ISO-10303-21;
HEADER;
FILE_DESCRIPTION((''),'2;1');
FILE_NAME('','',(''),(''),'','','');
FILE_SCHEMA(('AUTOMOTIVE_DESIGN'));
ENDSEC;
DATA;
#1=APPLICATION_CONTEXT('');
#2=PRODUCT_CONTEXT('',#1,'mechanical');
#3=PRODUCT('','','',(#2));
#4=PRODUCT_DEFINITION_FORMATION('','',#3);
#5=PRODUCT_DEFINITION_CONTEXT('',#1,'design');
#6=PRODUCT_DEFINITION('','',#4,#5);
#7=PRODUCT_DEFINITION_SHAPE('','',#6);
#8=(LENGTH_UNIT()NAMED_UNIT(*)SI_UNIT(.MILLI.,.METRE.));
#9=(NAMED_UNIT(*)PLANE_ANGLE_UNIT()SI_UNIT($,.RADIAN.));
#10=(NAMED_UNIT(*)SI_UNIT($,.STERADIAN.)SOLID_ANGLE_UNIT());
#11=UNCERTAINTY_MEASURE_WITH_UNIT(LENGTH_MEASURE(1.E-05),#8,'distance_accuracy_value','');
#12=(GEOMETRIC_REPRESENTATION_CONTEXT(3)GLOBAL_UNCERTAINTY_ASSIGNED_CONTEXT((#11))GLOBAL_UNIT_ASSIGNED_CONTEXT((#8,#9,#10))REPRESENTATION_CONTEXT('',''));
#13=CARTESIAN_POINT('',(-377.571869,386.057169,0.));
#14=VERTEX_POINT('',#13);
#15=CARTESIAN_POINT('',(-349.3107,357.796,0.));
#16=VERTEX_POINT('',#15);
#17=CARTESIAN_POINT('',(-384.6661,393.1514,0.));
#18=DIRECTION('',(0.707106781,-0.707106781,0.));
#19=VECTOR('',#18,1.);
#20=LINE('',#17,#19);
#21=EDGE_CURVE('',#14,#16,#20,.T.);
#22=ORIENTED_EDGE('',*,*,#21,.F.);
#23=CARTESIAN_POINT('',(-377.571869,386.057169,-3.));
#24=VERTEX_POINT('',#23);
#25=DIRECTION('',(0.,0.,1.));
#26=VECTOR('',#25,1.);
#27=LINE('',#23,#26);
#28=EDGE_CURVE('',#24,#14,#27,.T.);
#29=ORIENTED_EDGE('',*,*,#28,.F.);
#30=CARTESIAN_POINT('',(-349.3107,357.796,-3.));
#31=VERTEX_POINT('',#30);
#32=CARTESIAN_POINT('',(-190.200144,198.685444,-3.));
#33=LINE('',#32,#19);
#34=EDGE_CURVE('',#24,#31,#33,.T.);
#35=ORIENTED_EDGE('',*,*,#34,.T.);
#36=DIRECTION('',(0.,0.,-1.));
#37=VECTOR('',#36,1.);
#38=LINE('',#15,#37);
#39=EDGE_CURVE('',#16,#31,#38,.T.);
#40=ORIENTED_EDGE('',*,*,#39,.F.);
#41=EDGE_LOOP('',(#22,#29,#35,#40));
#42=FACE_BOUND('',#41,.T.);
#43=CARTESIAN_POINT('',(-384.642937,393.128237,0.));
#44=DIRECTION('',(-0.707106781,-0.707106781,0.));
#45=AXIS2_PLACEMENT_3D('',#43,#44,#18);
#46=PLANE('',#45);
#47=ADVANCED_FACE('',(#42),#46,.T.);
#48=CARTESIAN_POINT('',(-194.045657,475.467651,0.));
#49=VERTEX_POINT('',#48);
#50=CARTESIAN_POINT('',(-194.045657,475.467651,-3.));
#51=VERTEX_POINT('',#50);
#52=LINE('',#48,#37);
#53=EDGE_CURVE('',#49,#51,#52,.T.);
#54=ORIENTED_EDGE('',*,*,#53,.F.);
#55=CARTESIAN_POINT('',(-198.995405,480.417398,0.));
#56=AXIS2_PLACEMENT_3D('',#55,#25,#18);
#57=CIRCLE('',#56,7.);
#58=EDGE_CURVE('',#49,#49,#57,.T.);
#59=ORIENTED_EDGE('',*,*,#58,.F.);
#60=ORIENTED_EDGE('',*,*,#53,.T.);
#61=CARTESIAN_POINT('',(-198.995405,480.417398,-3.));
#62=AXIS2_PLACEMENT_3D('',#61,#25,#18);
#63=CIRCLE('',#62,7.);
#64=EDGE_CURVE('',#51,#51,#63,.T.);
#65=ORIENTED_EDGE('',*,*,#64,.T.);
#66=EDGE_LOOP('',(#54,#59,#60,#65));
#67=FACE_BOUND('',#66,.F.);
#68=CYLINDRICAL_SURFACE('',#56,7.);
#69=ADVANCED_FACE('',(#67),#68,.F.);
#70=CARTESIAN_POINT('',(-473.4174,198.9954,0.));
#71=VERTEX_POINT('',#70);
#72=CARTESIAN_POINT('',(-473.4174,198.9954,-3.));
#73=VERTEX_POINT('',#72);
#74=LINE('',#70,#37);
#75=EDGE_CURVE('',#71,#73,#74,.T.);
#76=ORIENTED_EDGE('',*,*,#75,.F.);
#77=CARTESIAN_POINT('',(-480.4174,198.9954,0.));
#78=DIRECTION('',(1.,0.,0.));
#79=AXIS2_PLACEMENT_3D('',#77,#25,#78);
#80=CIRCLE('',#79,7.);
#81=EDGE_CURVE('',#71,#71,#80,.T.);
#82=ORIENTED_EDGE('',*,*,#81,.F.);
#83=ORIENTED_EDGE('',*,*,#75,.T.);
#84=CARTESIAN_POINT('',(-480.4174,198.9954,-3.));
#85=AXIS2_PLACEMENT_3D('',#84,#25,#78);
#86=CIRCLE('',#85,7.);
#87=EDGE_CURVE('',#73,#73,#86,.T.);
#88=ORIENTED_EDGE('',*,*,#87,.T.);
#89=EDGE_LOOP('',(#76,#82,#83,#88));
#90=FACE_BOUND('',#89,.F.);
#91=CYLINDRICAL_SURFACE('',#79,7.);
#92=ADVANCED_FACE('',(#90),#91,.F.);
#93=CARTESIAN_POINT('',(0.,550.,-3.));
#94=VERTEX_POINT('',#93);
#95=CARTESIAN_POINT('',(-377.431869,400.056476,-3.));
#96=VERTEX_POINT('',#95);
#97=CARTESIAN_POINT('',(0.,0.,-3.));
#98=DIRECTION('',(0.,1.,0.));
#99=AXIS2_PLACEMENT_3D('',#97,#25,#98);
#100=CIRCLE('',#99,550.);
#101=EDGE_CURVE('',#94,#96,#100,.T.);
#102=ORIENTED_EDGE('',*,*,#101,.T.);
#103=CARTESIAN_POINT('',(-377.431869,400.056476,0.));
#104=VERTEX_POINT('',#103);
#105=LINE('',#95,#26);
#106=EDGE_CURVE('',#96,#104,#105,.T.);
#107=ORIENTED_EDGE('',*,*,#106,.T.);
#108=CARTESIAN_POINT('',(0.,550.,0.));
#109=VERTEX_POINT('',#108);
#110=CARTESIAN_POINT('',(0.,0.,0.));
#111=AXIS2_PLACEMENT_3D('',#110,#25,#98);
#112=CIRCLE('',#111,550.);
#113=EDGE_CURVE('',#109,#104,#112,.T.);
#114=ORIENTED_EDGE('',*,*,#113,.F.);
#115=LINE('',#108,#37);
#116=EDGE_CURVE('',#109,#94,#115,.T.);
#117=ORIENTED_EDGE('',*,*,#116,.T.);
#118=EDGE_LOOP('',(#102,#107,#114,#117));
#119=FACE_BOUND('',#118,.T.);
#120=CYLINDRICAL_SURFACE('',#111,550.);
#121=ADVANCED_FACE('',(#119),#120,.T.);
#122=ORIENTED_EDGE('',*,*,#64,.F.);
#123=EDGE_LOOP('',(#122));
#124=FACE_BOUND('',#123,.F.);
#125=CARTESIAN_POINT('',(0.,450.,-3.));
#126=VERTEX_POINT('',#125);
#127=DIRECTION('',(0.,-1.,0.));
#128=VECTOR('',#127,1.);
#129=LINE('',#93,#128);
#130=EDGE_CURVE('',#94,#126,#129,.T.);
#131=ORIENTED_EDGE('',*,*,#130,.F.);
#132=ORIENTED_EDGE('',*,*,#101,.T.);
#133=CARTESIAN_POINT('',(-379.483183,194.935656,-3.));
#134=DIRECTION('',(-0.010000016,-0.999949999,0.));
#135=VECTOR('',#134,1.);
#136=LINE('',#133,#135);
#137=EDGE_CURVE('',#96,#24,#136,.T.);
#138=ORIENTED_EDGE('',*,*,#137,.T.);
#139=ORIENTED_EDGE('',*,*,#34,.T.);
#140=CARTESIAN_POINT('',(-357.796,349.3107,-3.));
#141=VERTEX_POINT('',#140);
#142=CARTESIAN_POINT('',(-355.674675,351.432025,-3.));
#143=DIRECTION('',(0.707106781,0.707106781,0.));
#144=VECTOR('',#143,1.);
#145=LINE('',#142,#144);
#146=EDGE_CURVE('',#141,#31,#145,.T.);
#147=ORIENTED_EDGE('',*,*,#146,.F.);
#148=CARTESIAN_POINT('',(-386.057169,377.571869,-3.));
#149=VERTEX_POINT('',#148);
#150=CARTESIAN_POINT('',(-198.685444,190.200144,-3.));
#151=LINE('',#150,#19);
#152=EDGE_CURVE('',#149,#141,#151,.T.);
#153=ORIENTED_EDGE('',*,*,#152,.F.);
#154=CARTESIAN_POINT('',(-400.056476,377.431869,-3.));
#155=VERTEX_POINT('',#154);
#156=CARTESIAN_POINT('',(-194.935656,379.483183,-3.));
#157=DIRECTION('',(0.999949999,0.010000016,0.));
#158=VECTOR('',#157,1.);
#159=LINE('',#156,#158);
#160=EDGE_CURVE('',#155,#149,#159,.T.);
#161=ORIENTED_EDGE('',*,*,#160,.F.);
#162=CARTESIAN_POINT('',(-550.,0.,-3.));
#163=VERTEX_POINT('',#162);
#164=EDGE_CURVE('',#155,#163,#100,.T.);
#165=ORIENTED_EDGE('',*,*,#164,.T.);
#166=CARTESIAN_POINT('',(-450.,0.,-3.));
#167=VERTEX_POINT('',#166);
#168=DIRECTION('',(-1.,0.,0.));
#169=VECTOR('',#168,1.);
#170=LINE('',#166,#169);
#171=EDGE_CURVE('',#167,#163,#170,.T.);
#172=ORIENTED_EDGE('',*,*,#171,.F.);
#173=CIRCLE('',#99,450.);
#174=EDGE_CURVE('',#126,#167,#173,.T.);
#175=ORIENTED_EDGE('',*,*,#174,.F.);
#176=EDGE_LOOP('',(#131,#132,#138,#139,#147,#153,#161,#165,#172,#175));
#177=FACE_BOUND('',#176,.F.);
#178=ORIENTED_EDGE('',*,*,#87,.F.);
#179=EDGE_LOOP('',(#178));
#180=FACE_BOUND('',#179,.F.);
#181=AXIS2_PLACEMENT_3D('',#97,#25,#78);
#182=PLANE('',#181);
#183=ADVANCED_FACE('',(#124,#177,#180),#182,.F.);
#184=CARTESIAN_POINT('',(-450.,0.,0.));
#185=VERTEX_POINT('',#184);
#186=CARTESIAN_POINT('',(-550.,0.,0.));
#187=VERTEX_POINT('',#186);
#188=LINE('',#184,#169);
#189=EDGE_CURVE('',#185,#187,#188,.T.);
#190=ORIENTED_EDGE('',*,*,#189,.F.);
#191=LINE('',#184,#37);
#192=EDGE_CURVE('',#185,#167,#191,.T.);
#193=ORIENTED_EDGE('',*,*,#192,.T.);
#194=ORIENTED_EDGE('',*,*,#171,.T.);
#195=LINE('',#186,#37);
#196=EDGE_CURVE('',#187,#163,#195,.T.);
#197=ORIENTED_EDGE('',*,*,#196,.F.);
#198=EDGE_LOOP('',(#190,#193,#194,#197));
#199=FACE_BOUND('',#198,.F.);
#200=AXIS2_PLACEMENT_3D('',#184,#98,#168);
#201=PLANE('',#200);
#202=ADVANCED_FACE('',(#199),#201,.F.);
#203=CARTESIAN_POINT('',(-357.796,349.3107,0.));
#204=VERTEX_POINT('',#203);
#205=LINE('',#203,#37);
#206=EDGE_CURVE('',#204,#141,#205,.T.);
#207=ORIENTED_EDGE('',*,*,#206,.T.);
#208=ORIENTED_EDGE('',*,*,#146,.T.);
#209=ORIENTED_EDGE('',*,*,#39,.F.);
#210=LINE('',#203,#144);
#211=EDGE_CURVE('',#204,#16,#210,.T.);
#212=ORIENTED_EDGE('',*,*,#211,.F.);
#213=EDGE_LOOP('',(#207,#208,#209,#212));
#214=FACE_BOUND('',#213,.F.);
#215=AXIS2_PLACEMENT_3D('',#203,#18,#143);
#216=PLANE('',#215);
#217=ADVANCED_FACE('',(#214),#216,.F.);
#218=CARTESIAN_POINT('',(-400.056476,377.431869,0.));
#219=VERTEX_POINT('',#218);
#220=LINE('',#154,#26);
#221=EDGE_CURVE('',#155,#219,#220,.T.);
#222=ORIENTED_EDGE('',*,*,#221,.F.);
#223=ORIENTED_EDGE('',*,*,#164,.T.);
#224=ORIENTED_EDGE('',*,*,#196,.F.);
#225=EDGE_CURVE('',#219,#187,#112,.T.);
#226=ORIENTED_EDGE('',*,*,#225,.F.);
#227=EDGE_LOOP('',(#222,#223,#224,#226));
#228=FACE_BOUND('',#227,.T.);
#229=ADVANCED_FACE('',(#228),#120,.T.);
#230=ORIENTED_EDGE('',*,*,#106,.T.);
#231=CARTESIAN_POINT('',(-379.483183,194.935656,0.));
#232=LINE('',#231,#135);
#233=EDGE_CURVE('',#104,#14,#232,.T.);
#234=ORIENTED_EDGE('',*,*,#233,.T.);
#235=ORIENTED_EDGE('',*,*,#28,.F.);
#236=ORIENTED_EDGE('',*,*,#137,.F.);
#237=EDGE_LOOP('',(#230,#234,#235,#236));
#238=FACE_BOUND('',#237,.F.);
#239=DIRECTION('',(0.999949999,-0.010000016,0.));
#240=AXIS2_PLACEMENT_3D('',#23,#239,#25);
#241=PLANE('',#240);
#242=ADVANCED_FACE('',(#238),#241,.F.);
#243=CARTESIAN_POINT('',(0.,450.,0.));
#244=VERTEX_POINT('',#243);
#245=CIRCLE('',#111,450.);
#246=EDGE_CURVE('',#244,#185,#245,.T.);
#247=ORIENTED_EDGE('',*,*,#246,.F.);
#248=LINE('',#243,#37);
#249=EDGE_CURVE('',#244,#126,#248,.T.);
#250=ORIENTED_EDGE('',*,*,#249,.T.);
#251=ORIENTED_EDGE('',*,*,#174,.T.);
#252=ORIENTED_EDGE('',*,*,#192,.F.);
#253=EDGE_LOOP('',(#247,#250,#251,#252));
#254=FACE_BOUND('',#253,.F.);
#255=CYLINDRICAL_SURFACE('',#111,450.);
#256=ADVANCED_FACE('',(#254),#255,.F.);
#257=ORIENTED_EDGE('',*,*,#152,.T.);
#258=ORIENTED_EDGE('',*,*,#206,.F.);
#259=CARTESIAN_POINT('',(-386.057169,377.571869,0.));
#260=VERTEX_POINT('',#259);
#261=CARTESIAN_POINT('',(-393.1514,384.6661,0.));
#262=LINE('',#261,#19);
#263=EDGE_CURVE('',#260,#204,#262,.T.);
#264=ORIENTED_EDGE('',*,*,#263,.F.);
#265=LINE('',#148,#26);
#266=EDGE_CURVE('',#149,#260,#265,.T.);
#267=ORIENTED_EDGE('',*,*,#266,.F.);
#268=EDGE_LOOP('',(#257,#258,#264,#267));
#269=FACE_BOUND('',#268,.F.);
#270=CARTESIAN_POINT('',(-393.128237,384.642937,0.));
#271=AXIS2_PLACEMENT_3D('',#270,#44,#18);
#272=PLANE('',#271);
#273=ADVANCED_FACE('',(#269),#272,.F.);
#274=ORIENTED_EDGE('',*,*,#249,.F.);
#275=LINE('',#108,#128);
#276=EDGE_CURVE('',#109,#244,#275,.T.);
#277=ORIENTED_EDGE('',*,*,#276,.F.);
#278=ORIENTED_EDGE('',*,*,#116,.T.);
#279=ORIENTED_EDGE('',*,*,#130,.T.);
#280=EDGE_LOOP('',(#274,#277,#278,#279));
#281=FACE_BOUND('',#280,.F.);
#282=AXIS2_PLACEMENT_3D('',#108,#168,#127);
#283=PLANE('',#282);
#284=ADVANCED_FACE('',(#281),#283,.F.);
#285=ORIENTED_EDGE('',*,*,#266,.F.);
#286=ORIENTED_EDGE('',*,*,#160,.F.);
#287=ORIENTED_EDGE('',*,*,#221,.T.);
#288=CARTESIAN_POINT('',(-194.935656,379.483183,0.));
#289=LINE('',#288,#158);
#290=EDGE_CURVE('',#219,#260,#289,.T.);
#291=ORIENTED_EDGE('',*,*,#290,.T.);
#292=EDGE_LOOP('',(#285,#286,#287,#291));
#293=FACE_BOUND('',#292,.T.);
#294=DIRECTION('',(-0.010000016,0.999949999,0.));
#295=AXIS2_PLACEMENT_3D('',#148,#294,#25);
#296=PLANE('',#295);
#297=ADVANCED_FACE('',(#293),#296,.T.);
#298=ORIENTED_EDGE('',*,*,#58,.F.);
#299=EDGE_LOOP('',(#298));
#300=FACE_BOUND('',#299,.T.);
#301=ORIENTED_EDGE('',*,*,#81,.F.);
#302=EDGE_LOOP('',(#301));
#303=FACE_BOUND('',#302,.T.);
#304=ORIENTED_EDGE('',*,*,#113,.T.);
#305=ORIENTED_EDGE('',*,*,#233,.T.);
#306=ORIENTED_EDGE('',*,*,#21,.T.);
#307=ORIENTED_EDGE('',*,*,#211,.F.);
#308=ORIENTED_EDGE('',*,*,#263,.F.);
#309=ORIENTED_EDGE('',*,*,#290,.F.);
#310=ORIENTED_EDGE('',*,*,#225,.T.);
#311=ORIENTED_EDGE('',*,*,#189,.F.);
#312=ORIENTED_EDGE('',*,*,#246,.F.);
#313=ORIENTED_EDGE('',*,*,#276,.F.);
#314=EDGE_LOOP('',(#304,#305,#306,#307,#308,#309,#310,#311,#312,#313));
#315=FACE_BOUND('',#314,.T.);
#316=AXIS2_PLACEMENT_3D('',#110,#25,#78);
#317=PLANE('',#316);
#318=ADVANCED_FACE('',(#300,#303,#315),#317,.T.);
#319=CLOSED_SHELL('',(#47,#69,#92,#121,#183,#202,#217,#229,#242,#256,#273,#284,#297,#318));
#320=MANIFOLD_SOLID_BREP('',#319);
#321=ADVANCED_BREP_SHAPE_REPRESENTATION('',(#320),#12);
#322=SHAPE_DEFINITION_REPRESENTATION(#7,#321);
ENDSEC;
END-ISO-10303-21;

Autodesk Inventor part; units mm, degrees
ref_plane "YZ Plane" through (0, 0, 0) normal (1, 0, 0) x (0, 1, 0)
ref_plane "XZ Plane" through (0, 0, 0) normal (0, 1, 0) x (-1, 0, 0)
ref_plane "XY Plane" through (0, 0, 0) normal (0, 0, 1) x (1, 0, 0)
sketch "Sketch1" plane through (0, 0, 0) normal (0, 0, 1) x (1, 0, 0)
  arc A0 (0, 550) -> (-550, 0) centre (0, 0) ccw
  arc A1 (0, 450) -> (-450, 0) centre (0, 0) ccw
  line L0 (0, 550) -> (0, 450)
  line L1 (-450, 0) -> (-550, 0)
  point P0 (-500, 0)
  point P1 (0, 500)
  dimension "d0" = 1100
  dimension "d1" = 900
extrude "Plate1" add sketch "Sketch1" against normal blind 3
sketch "Sketch2" plane through (0, 0, 0) normal (0, 0, 1) x (1, 0, 0)
  line L0 (-550, 0) -> (-450, 0) projected
  arc A0 (0, 550) -> (-550, 0) centre (0, 0) ccw construction
  circle A1 centre (-480.4174, 198.9954) radius 7
  arc A2 (0, 450) -> (-450, 0) centre (0, 0) ccw construction
  circle A3 centre (0, 0) radius 520 construction
  line L1 (-480.4174, 198.9954) -> (0, 0) construction
  dimension "d17" = 1040
  dimension "d4" = 14
  dimension "d16" = 22.5
extrude "Cut1" cut sketch "Sketch2" against normal through all
pattern_circular "Circular Pattern1" count 2 over 45 about axis through (0, 0, 0) along (0, 0, -1) of "Cut1"
sketch "Sketch3" plane through (0, 0, 0) normal (0, 0, 1) x (1, 0, 0)
  line L0 (-388.9087, 388.9087) -> (-318.1981, 318.1981) construction
  arc A0 (0, 450) -> (-450, 0) centre (0, 0) ccw projected
  arc A1 (0, 550) -> (-550, 0) centre (0, 0) ccw projected
  line L1 (-550, 0) -> (-450, 0) projected
  line L2 (-384.6661, 393.1514) -> (-393.1514, 384.6661)
  line L3 (-384.6661, 393.1514) -> (-349.3107, 357.796)
  line L4 (-393.1514, 384.6661) -> (-357.796, 349.3107)
  line L5 (-357.796, 349.3107) -> (-349.3107, 357.796)
  point P0 (-388.9087, 388.9087)
  dimension "d11" = 45
  dimension "d12" = 12
  dimension "d13" = 50
extrude "Extrusion1" cut sketch "Sketch3" against normal through all
chamfer "Corner Chamfer1" distance 10 angle 45 2 edges at (-384.6429, 393.1282, -1.5) (-393.1282, 384.6429, -1.5)
equation "\"d0\" = Диаметр_вн"
equation "\"d1\" = d0 - 2 * Ширина_кольца"
equation "\"d4\" = Диаметр_отв"
equation "\"d6\" = Thickness"
equation "\"d2\" = Thickness"
equation "\"BendReliefWidth\" = Thickness"
equation "\"BendReliefDepth\" = 0.5 * Thickness"
equation "\"CornerReliefSize\" = 4 * Thickness"
equation "\"MinimumRemnant\" = 2 * Thickness"
equation "\"TransitionRadius\" = BendRadius"
equation "\"JacobiRadiusSize\" = BendRadius"
equation "\"GapSize\" = Thickness"
equation "\"Диаметр_вн\" = 1100"
equation "\"Ширина_кольца\" = 100"
equation "\"Диаметр_отв\" = 14"
equation "\"Thickness\" = 3"
equation "\"BendRadius\" = 5"
properties part number "BSH 502 segment" material "Stainless Steel"
